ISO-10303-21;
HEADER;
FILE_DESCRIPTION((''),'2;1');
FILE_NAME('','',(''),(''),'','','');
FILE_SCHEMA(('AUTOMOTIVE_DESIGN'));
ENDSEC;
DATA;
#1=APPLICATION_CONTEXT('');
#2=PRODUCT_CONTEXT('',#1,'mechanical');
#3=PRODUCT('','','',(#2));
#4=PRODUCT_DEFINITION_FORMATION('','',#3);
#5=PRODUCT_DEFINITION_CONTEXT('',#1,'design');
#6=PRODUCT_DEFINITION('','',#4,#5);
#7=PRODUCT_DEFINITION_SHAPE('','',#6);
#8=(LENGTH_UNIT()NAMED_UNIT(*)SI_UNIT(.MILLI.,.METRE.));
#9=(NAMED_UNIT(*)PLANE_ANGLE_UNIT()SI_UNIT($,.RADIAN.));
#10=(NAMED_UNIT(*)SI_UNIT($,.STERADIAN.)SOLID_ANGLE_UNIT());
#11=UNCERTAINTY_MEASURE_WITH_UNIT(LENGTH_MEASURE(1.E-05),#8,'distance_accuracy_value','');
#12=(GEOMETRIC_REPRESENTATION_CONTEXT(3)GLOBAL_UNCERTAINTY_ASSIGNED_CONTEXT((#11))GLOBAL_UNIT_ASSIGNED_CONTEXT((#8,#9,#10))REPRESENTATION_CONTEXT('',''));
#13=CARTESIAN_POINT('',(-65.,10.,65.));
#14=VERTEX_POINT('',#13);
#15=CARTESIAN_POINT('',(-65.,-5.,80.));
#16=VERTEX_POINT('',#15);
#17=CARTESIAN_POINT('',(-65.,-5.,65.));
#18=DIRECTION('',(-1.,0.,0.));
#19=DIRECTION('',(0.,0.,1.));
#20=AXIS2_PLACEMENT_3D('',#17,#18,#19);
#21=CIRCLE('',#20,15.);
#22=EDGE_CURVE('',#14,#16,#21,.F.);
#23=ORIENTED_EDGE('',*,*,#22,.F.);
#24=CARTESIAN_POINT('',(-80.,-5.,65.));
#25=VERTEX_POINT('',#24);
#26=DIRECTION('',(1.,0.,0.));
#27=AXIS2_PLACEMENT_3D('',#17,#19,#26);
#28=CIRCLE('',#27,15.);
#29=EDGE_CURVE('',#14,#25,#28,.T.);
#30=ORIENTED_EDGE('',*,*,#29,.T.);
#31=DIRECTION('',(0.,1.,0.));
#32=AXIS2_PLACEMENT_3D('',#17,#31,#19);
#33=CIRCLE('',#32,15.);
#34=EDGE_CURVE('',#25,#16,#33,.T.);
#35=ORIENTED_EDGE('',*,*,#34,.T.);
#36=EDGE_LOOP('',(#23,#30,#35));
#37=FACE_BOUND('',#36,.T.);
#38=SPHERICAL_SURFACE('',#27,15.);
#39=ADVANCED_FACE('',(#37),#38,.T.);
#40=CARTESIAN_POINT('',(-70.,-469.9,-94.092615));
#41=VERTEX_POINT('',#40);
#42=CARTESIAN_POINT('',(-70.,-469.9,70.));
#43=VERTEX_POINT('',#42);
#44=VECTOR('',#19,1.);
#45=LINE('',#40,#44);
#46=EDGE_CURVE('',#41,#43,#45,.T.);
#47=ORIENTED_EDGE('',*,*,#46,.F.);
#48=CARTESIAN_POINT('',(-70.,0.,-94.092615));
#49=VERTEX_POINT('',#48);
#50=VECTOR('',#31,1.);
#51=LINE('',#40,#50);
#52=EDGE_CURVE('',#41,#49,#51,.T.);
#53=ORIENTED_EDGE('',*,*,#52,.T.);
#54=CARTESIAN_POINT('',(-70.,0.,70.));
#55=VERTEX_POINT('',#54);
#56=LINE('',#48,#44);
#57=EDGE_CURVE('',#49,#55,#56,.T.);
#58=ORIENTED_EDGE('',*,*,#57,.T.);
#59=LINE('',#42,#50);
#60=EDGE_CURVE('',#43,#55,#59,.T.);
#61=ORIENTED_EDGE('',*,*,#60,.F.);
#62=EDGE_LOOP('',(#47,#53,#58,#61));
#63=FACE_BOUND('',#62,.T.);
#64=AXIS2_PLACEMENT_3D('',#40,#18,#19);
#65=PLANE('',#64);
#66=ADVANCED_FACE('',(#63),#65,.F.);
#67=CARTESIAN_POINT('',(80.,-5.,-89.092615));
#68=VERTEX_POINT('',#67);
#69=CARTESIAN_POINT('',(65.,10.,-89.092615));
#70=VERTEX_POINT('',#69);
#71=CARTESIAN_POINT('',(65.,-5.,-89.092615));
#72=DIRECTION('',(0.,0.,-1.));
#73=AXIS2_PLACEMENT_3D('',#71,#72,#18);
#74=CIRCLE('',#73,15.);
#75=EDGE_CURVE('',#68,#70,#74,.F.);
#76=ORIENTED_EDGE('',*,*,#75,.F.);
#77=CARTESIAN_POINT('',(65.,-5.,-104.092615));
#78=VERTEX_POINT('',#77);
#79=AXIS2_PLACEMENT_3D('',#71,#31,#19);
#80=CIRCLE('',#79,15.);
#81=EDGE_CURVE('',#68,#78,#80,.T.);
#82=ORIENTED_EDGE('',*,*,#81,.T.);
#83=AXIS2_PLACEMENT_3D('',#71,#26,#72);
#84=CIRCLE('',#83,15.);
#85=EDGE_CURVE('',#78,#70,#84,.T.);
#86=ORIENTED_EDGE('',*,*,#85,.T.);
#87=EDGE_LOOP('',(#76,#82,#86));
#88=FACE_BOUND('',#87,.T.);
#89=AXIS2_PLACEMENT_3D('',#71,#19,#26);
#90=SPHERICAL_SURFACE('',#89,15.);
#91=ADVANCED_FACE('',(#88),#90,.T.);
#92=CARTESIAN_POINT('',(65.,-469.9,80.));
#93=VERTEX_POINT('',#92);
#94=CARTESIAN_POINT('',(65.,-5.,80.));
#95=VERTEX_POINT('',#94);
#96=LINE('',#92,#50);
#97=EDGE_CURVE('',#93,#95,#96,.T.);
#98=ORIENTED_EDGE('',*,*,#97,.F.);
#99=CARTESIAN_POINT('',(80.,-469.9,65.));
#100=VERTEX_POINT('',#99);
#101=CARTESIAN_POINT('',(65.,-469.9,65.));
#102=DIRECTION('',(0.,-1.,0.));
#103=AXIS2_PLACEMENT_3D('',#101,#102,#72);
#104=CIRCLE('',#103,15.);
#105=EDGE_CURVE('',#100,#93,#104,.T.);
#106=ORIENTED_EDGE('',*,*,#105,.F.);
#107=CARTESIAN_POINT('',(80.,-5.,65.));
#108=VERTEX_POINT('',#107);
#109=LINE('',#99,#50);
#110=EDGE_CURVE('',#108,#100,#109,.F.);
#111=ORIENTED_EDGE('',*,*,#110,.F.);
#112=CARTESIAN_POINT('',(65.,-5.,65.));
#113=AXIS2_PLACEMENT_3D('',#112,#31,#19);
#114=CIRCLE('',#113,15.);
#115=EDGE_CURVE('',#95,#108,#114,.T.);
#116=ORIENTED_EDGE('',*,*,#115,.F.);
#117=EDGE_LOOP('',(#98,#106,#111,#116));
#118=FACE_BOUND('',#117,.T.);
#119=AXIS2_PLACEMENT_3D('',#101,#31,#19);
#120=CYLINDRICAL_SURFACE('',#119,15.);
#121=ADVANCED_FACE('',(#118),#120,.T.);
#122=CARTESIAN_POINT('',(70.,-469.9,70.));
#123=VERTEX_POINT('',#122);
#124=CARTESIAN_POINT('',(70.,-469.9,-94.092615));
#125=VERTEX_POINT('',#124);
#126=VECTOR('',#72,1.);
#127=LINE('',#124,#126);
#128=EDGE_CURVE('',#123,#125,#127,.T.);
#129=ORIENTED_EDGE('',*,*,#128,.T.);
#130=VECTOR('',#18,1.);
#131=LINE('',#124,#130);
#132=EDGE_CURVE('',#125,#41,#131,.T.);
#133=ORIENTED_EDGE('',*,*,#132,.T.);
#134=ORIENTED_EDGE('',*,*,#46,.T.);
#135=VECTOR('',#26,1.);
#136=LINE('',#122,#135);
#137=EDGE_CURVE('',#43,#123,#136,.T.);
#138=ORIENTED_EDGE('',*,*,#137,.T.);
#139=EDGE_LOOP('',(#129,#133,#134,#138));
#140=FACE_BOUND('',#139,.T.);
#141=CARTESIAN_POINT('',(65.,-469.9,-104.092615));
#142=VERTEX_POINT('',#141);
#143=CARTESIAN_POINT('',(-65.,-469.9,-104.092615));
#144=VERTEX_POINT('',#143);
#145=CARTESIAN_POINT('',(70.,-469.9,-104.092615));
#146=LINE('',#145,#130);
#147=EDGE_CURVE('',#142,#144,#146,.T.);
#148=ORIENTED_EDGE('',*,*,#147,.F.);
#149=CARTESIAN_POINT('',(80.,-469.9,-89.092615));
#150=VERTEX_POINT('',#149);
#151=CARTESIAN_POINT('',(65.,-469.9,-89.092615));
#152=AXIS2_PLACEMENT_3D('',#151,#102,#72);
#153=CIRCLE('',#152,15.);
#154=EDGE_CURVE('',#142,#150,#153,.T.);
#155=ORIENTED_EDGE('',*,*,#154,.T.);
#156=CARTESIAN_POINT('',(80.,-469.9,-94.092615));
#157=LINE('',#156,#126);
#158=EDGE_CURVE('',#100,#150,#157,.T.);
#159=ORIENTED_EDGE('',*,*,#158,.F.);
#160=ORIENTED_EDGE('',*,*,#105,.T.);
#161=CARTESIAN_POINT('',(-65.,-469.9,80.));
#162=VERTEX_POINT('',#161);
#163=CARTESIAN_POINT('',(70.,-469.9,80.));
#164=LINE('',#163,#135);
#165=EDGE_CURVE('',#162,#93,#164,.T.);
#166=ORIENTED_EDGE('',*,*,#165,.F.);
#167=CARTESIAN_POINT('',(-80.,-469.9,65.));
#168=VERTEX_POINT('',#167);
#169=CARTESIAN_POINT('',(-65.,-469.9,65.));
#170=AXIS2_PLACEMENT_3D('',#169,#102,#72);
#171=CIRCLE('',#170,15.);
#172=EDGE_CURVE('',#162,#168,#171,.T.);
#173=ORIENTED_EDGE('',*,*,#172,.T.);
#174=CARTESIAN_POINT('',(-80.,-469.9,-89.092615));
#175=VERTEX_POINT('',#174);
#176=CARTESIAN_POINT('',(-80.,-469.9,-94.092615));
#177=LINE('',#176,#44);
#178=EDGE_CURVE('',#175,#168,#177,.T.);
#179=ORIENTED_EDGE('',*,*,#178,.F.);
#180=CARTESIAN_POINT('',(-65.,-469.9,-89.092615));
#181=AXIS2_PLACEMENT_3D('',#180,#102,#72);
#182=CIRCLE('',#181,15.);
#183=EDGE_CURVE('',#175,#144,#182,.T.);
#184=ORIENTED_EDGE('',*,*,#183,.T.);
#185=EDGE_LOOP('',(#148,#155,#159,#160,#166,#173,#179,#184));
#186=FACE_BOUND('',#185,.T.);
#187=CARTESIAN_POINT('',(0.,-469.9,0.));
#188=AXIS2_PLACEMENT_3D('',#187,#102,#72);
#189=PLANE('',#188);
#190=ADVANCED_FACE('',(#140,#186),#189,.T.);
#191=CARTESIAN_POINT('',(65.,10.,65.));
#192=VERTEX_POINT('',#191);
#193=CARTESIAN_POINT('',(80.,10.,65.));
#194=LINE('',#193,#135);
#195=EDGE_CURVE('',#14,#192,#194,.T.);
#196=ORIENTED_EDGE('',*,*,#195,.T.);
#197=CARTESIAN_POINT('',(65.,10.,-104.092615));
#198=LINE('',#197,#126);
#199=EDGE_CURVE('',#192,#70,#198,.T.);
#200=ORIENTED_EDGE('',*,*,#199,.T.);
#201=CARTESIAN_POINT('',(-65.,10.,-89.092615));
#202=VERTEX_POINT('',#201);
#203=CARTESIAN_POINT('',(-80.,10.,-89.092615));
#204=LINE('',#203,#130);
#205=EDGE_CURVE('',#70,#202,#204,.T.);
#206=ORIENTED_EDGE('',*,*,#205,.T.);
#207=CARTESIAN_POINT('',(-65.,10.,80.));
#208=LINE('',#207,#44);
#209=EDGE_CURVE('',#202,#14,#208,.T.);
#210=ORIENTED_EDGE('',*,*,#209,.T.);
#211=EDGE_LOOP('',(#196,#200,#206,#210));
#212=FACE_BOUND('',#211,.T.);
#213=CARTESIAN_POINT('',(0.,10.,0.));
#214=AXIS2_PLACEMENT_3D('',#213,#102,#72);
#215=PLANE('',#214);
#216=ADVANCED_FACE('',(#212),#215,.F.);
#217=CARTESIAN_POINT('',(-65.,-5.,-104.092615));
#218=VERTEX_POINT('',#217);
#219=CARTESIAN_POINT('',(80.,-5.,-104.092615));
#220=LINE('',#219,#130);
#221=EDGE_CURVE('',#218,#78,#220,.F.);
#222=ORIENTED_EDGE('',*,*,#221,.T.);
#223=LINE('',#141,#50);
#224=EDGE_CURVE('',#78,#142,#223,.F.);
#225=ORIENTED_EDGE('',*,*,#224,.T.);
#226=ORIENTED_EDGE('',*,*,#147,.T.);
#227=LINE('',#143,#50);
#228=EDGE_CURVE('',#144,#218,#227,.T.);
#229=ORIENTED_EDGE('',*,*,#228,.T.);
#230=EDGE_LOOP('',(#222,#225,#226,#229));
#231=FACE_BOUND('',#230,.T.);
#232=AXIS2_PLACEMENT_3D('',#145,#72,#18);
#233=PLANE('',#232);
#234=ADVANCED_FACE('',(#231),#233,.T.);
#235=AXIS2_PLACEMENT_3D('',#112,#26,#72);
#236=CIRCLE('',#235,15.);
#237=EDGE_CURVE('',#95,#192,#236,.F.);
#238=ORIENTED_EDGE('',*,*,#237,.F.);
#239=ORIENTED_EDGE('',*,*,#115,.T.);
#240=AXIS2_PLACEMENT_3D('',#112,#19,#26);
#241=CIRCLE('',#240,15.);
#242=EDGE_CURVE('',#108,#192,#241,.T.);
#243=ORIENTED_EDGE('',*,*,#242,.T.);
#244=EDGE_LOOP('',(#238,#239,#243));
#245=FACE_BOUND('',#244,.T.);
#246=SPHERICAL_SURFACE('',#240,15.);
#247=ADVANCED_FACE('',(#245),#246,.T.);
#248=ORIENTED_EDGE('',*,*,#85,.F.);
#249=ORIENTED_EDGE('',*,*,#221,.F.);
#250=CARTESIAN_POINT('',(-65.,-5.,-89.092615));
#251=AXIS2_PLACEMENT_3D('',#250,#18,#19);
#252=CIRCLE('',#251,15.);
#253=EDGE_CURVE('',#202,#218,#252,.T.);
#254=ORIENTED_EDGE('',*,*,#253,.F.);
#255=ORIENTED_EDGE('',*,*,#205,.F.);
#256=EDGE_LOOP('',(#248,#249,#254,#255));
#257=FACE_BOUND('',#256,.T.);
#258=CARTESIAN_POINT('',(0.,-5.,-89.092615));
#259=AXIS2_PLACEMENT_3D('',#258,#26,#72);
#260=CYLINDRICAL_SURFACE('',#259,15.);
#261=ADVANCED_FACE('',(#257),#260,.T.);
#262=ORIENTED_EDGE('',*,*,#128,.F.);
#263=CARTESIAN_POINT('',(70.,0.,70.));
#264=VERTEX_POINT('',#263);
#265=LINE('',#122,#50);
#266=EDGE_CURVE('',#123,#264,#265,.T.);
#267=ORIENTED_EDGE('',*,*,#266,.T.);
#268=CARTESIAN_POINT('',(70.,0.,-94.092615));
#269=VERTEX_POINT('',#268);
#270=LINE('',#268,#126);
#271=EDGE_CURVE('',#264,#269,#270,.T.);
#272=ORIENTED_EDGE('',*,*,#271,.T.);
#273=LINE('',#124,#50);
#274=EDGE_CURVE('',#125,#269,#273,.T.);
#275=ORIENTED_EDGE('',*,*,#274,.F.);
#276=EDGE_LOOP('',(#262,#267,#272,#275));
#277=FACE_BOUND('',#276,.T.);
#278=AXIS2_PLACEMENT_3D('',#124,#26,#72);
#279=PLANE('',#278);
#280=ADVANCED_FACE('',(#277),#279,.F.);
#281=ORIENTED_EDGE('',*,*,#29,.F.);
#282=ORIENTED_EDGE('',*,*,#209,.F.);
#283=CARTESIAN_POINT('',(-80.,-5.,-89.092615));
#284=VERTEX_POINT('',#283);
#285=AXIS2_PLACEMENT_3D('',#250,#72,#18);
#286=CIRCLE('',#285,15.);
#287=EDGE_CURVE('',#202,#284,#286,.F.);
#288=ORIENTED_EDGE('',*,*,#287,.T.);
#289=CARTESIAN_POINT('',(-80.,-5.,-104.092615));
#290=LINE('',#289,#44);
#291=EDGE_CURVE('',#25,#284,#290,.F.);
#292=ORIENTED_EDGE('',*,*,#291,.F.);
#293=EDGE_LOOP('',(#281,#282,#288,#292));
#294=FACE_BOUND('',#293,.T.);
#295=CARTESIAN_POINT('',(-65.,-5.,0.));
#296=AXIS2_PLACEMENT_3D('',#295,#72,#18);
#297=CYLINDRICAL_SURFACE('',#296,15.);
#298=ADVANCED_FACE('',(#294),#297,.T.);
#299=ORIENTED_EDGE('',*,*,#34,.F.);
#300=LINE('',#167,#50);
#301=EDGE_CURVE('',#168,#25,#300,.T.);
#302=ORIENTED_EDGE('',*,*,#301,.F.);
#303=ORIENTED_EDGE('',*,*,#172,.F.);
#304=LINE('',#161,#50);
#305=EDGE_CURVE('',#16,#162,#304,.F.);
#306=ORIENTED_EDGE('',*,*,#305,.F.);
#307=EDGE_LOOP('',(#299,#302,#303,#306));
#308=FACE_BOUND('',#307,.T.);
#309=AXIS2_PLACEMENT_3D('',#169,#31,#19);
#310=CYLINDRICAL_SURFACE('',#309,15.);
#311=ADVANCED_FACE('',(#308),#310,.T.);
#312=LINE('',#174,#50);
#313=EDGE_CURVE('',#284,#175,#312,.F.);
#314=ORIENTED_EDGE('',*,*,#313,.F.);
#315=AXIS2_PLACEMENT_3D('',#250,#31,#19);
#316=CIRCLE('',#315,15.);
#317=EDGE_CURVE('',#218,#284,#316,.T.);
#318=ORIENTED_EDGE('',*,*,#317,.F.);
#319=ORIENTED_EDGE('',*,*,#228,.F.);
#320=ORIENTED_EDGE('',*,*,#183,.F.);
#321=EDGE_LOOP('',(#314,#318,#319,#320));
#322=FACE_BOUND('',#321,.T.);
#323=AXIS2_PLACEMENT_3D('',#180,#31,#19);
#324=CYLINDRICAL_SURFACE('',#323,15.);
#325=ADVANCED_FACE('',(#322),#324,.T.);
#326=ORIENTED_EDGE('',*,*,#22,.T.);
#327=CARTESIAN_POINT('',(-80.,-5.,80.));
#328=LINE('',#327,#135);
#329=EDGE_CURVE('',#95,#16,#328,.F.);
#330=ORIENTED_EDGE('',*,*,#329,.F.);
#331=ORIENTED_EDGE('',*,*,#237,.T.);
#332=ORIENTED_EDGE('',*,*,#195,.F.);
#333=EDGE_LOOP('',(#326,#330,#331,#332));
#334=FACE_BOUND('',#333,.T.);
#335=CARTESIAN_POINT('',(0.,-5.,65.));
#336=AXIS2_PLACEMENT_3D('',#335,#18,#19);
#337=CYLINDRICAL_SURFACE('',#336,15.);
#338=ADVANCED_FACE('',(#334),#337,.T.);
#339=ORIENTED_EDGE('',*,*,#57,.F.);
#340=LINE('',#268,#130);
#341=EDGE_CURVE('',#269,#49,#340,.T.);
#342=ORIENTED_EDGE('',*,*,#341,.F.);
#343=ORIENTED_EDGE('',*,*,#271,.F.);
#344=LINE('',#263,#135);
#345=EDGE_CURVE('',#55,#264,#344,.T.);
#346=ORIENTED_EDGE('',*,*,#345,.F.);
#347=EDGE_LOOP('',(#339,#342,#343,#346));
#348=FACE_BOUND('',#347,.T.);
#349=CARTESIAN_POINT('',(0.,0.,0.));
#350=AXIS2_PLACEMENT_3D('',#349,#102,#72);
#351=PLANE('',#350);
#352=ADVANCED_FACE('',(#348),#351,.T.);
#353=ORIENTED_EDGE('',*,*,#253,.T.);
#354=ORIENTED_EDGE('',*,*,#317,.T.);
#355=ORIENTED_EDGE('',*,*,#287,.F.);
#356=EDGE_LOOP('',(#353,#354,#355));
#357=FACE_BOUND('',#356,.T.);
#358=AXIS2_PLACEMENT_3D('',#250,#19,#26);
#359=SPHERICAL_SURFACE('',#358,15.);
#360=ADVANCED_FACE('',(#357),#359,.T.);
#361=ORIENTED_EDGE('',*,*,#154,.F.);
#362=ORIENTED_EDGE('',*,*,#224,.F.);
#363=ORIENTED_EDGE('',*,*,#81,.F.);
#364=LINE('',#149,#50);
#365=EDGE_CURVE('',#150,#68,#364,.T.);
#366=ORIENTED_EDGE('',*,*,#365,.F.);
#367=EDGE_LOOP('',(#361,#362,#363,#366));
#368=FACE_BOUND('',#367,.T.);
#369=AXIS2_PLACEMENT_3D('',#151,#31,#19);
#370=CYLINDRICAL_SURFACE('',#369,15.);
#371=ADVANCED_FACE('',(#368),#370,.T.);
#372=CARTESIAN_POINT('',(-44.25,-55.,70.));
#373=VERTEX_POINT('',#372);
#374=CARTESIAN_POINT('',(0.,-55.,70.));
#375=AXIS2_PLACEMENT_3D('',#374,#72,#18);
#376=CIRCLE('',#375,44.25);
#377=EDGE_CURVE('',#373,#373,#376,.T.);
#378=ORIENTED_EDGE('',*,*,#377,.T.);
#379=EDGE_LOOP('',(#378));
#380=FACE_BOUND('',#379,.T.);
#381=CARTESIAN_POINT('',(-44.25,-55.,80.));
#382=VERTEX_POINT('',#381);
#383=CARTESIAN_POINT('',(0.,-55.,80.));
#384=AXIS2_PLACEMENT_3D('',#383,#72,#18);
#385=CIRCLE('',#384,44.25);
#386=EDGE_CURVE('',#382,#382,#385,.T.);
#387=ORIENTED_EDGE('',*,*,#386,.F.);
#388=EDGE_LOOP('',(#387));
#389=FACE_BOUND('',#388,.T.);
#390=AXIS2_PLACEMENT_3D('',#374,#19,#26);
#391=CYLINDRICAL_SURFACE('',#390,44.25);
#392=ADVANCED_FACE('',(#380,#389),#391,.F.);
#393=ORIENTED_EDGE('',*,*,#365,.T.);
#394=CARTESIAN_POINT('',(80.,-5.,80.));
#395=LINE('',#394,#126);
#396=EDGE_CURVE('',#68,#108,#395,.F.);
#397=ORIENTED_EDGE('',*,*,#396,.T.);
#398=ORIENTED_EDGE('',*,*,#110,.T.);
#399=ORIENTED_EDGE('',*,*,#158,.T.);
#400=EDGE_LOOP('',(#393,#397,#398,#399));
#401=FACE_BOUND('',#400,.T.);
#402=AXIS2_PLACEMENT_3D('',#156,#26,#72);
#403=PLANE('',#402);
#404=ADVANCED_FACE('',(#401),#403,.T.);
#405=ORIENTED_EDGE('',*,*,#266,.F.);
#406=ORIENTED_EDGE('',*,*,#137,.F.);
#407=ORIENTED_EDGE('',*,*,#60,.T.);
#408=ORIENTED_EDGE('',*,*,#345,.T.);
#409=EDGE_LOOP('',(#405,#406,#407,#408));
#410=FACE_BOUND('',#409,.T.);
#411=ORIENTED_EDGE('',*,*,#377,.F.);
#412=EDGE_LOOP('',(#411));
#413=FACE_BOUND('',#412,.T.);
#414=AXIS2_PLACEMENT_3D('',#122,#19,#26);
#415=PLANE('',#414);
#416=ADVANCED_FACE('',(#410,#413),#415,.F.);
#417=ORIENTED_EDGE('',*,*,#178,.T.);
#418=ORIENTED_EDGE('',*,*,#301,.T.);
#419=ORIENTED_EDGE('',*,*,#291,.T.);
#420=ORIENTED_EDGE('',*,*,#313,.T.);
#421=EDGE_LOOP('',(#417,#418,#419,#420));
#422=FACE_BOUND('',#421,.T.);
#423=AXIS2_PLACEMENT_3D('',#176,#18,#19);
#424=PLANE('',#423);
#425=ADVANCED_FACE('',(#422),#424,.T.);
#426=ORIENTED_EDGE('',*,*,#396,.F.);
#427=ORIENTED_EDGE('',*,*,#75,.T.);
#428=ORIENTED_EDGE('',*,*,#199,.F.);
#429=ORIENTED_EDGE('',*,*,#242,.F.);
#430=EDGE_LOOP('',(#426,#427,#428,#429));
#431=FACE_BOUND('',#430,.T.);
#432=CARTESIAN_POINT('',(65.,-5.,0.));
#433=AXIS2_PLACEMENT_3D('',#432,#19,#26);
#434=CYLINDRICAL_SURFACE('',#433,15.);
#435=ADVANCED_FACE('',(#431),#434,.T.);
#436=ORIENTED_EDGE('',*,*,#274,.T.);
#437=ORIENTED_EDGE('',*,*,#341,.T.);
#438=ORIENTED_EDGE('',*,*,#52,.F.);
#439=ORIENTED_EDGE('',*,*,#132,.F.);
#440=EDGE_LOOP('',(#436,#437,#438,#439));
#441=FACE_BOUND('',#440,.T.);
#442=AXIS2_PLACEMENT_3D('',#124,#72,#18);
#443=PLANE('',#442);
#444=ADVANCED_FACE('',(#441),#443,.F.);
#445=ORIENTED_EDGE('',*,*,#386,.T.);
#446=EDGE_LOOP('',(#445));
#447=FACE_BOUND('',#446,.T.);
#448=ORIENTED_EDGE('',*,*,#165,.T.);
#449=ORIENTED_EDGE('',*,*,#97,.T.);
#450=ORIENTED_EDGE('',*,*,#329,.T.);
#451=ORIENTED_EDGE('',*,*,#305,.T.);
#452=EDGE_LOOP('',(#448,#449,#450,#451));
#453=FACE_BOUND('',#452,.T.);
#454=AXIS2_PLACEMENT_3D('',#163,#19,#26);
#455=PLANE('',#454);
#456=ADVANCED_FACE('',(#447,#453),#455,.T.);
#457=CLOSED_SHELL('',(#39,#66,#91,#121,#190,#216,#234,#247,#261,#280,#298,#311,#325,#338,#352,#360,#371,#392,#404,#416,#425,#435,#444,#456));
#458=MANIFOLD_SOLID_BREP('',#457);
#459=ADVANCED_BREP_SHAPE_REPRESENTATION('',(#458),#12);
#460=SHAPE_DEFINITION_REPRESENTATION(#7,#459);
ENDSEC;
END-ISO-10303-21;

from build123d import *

# Parameters (mm, degrees)
SKETCH2_W           = 140
SKETCH2_H           = 164.092615239
BOSS_EXTRUDE1_DEPTH = 469.9
SHELL1_T            = 10
FILLET2_R           = 15
SKETCH4_R           = 44.25
CUT_EXTRUDE2_DEPTH  = 10


with BuildPart() as part:
    # Sketch2 → Boss-Extrude1 (new body)
    with BuildSketch(Plane(origin=(0, 0, 0), x_dir=(1, 0, 0), z_dir=(0, 1, 0))):
        with Locations((0, 12.04630762)):
            Rectangle(SKETCH2_W, SKETCH2_H)
    extrude(amount=-BOSS_EXTRUDE1_DEPTH)

    # Shell1
    shell1_openings = [part.faces().sort_by_distance(p)[0] for p in [
        (0, -469.9, -12.046307619),
    ]]
    offset(amount=SHELL1_T, openings=shell1_openings, kind=Kind.INTERSECTION)

    # Fillet2
    # the kernel refuses this fillet: 15 mm, written as the material it takes off along each edge
    with BuildSketch(Plane(origin=(65, -5, 65), x_dir=(0, 1, 0), z_dir=(1, 0, 0))) as fillet2_piece_1_section:
        Polygon((0, 0), (FILLET2_R, 0), (FILLET2_R, FILLET2_R), (0, FILLET2_R), align=None)
    fillet2_piece_1 = extrude(amount=FILLET2_R, mode=Mode.PRIVATE)
    fillet2_piece_1 = fillet2_piece_1 - Plane(origin=(65, -5, 65), x_dir=(0, -0.7071067811865475, -0.7071067811865475), z_dir=(1, 0, 0)) * Sphere(FILLET2_R, mode=Mode.PRIVATE)
    add(fillet2_piece_1, mode=Mode.SUBTRACT)
    with BuildSketch(Plane(origin=(-65, -5, 65), x_dir=(0, 0, 1), z_dir=(0, 1, 0))) as fillet2_piece_2_section:
        Polygon((0, 0), (FILLET2_R, 0), (FILLET2_R, -FILLET2_R), (0, -FILLET2_R), align=None)
    fillet2_piece_2 = extrude(amount=FILLET2_R, mode=Mode.PRIVATE)
    fillet2_piece_2 = fillet2_piece_2 - Plane(origin=(-65, -5, 65), x_dir=(0.7071067811865475, 0, -0.7071067811865475), z_dir=(0, 1, 0)) * Sphere(FILLET2_R, mode=Mode.PRIVATE)
    add(fillet2_piece_2, mode=Mode.SUBTRACT)
    with BuildSketch(Plane(origin=(-65, -5, -89.092615239), x_dir=(0, 1, 0), z_dir=(0, 0, -1))) as fillet2_piece_3_section:
        Polygon((0, 0), (FILLET2_R, 0), (FILLET2_R, -FILLET2_R), (0, -FILLET2_R), align=None)
    fillet2_piece_3 = extrude(amount=FILLET2_R, mode=Mode.PRIVATE)
    fillet2_piece_3 = fillet2_piece_3 - Plane(origin=(-65, -5, -89.092615239), x_dir=(0.7071067811865475, -0.7071067811865475, 0), z_dir=(0, 0, -1)) * Sphere(FILLET2_R, mode=Mode.PRIVATE)
    add(fillet2_piece_3, mode=Mode.SUBTRACT)
    with BuildSketch(Plane(origin=(65, -5, -89.092615239), x_dir=(1, 0, 0), z_dir=(0, 0, -1))) as fillet2_piece_4_section:
        Polygon((0, 0), (FILLET2_R, 0), (FILLET2_R, -FILLET2_R), (0, -FILLET2_R), align=None)
    fillet2_piece_4 = extrude(amount=FILLET2_R, mode=Mode.PRIVATE)
    fillet2_piece_4 = fillet2_piece_4 - Plane(origin=(65, -5, -89.092615239), x_dir=(-0.7071067811865475, -0.7071067811865475, 0), z_dir=(0, 0, -1)) * Sphere(FILLET2_R, mode=Mode.PRIVATE)
    add(fillet2_piece_4, mode=Mode.SUBTRACT)
    with BuildSketch(Plane(origin=(65, 10, 80), x_dir=(0, -1, 0), z_dir=(-1, 0, 0)), Plane(origin=(-65, 10, -104.092615239), x_dir=(0, -1, 0), z_dir=(1, 0, 0))) as fillet2_piece_5:
        with BuildLine():
            CenterArc((FILLET2_R, -FILLET2_R), FILLET2_R, 90, 90)
            Line((0, -FILLET2_R), (0, 0))
            Line((0, 0), (FILLET2_R, 0))
        make_face()
    extrude(amount=130, mode=Mode.SUBTRACT)
    with BuildSketch(Plane(origin=(-80, 10, 65), x_dir=(0, -1, 0), z_dir=(0, 0, -1)), Plane(origin=(80, 10, -89.092615239), x_dir=(0, -1, 0), z_dir=(0, 0, 1))) as fillet2_piece_6:
        with BuildLine():
            CenterArc((FILLET2_R, -FILLET2_R), FILLET2_R, 90, 90)
            Line((0, -FILLET2_R), (0, 0))
            Line((0, 0), (FILLET2_R, 0))
        make_face()
    extrude(amount=154.092615239, mode=Mode.SUBTRACT)
    with BuildSketch(Plane(origin=(80, -507.4, 80), x_dir=(-1, 0, 0), z_dir=(0, 1, 0)), Plane(origin=(-80, -5, 80), x_dir=(1, 0, 0), z_dir=(0, -1, 0)), Plane(origin=(-80, -5, -104.092615239), x_dir=(0, 0, 1), z_dir=(0, -1, 0)), Plane(origin=(80, -5, -104.092615239), x_dir=(-1, 0, 0), z_dir=(0, -1, 0))) as fillet2_piece_7:
        with BuildLine():
            CenterArc((FILLET2_R, -FILLET2_R), FILLET2_R, 90, 90)
            Line((0, -FILLET2_R), (0, 0))
            Line((0, 0), (FILLET2_R, 0))
        make_face()
    extrude(amount=502.4, mode=Mode.SUBTRACT)

    # Sketch4 → Cut-Extrude2 (cut)
    with BuildSketch(Plane(origin=(44.675144213, 0, 80), x_dir=(-1, 0, 0), z_dir=(0, 0, -1))):
        with Locations((44.675144213, -55)):
            Circle(SKETCH4_R)
    extrude(amount=CUT_EXTRUDE2_DEPTH, mode=Mode.SUBTRACT)


solid = part.part
